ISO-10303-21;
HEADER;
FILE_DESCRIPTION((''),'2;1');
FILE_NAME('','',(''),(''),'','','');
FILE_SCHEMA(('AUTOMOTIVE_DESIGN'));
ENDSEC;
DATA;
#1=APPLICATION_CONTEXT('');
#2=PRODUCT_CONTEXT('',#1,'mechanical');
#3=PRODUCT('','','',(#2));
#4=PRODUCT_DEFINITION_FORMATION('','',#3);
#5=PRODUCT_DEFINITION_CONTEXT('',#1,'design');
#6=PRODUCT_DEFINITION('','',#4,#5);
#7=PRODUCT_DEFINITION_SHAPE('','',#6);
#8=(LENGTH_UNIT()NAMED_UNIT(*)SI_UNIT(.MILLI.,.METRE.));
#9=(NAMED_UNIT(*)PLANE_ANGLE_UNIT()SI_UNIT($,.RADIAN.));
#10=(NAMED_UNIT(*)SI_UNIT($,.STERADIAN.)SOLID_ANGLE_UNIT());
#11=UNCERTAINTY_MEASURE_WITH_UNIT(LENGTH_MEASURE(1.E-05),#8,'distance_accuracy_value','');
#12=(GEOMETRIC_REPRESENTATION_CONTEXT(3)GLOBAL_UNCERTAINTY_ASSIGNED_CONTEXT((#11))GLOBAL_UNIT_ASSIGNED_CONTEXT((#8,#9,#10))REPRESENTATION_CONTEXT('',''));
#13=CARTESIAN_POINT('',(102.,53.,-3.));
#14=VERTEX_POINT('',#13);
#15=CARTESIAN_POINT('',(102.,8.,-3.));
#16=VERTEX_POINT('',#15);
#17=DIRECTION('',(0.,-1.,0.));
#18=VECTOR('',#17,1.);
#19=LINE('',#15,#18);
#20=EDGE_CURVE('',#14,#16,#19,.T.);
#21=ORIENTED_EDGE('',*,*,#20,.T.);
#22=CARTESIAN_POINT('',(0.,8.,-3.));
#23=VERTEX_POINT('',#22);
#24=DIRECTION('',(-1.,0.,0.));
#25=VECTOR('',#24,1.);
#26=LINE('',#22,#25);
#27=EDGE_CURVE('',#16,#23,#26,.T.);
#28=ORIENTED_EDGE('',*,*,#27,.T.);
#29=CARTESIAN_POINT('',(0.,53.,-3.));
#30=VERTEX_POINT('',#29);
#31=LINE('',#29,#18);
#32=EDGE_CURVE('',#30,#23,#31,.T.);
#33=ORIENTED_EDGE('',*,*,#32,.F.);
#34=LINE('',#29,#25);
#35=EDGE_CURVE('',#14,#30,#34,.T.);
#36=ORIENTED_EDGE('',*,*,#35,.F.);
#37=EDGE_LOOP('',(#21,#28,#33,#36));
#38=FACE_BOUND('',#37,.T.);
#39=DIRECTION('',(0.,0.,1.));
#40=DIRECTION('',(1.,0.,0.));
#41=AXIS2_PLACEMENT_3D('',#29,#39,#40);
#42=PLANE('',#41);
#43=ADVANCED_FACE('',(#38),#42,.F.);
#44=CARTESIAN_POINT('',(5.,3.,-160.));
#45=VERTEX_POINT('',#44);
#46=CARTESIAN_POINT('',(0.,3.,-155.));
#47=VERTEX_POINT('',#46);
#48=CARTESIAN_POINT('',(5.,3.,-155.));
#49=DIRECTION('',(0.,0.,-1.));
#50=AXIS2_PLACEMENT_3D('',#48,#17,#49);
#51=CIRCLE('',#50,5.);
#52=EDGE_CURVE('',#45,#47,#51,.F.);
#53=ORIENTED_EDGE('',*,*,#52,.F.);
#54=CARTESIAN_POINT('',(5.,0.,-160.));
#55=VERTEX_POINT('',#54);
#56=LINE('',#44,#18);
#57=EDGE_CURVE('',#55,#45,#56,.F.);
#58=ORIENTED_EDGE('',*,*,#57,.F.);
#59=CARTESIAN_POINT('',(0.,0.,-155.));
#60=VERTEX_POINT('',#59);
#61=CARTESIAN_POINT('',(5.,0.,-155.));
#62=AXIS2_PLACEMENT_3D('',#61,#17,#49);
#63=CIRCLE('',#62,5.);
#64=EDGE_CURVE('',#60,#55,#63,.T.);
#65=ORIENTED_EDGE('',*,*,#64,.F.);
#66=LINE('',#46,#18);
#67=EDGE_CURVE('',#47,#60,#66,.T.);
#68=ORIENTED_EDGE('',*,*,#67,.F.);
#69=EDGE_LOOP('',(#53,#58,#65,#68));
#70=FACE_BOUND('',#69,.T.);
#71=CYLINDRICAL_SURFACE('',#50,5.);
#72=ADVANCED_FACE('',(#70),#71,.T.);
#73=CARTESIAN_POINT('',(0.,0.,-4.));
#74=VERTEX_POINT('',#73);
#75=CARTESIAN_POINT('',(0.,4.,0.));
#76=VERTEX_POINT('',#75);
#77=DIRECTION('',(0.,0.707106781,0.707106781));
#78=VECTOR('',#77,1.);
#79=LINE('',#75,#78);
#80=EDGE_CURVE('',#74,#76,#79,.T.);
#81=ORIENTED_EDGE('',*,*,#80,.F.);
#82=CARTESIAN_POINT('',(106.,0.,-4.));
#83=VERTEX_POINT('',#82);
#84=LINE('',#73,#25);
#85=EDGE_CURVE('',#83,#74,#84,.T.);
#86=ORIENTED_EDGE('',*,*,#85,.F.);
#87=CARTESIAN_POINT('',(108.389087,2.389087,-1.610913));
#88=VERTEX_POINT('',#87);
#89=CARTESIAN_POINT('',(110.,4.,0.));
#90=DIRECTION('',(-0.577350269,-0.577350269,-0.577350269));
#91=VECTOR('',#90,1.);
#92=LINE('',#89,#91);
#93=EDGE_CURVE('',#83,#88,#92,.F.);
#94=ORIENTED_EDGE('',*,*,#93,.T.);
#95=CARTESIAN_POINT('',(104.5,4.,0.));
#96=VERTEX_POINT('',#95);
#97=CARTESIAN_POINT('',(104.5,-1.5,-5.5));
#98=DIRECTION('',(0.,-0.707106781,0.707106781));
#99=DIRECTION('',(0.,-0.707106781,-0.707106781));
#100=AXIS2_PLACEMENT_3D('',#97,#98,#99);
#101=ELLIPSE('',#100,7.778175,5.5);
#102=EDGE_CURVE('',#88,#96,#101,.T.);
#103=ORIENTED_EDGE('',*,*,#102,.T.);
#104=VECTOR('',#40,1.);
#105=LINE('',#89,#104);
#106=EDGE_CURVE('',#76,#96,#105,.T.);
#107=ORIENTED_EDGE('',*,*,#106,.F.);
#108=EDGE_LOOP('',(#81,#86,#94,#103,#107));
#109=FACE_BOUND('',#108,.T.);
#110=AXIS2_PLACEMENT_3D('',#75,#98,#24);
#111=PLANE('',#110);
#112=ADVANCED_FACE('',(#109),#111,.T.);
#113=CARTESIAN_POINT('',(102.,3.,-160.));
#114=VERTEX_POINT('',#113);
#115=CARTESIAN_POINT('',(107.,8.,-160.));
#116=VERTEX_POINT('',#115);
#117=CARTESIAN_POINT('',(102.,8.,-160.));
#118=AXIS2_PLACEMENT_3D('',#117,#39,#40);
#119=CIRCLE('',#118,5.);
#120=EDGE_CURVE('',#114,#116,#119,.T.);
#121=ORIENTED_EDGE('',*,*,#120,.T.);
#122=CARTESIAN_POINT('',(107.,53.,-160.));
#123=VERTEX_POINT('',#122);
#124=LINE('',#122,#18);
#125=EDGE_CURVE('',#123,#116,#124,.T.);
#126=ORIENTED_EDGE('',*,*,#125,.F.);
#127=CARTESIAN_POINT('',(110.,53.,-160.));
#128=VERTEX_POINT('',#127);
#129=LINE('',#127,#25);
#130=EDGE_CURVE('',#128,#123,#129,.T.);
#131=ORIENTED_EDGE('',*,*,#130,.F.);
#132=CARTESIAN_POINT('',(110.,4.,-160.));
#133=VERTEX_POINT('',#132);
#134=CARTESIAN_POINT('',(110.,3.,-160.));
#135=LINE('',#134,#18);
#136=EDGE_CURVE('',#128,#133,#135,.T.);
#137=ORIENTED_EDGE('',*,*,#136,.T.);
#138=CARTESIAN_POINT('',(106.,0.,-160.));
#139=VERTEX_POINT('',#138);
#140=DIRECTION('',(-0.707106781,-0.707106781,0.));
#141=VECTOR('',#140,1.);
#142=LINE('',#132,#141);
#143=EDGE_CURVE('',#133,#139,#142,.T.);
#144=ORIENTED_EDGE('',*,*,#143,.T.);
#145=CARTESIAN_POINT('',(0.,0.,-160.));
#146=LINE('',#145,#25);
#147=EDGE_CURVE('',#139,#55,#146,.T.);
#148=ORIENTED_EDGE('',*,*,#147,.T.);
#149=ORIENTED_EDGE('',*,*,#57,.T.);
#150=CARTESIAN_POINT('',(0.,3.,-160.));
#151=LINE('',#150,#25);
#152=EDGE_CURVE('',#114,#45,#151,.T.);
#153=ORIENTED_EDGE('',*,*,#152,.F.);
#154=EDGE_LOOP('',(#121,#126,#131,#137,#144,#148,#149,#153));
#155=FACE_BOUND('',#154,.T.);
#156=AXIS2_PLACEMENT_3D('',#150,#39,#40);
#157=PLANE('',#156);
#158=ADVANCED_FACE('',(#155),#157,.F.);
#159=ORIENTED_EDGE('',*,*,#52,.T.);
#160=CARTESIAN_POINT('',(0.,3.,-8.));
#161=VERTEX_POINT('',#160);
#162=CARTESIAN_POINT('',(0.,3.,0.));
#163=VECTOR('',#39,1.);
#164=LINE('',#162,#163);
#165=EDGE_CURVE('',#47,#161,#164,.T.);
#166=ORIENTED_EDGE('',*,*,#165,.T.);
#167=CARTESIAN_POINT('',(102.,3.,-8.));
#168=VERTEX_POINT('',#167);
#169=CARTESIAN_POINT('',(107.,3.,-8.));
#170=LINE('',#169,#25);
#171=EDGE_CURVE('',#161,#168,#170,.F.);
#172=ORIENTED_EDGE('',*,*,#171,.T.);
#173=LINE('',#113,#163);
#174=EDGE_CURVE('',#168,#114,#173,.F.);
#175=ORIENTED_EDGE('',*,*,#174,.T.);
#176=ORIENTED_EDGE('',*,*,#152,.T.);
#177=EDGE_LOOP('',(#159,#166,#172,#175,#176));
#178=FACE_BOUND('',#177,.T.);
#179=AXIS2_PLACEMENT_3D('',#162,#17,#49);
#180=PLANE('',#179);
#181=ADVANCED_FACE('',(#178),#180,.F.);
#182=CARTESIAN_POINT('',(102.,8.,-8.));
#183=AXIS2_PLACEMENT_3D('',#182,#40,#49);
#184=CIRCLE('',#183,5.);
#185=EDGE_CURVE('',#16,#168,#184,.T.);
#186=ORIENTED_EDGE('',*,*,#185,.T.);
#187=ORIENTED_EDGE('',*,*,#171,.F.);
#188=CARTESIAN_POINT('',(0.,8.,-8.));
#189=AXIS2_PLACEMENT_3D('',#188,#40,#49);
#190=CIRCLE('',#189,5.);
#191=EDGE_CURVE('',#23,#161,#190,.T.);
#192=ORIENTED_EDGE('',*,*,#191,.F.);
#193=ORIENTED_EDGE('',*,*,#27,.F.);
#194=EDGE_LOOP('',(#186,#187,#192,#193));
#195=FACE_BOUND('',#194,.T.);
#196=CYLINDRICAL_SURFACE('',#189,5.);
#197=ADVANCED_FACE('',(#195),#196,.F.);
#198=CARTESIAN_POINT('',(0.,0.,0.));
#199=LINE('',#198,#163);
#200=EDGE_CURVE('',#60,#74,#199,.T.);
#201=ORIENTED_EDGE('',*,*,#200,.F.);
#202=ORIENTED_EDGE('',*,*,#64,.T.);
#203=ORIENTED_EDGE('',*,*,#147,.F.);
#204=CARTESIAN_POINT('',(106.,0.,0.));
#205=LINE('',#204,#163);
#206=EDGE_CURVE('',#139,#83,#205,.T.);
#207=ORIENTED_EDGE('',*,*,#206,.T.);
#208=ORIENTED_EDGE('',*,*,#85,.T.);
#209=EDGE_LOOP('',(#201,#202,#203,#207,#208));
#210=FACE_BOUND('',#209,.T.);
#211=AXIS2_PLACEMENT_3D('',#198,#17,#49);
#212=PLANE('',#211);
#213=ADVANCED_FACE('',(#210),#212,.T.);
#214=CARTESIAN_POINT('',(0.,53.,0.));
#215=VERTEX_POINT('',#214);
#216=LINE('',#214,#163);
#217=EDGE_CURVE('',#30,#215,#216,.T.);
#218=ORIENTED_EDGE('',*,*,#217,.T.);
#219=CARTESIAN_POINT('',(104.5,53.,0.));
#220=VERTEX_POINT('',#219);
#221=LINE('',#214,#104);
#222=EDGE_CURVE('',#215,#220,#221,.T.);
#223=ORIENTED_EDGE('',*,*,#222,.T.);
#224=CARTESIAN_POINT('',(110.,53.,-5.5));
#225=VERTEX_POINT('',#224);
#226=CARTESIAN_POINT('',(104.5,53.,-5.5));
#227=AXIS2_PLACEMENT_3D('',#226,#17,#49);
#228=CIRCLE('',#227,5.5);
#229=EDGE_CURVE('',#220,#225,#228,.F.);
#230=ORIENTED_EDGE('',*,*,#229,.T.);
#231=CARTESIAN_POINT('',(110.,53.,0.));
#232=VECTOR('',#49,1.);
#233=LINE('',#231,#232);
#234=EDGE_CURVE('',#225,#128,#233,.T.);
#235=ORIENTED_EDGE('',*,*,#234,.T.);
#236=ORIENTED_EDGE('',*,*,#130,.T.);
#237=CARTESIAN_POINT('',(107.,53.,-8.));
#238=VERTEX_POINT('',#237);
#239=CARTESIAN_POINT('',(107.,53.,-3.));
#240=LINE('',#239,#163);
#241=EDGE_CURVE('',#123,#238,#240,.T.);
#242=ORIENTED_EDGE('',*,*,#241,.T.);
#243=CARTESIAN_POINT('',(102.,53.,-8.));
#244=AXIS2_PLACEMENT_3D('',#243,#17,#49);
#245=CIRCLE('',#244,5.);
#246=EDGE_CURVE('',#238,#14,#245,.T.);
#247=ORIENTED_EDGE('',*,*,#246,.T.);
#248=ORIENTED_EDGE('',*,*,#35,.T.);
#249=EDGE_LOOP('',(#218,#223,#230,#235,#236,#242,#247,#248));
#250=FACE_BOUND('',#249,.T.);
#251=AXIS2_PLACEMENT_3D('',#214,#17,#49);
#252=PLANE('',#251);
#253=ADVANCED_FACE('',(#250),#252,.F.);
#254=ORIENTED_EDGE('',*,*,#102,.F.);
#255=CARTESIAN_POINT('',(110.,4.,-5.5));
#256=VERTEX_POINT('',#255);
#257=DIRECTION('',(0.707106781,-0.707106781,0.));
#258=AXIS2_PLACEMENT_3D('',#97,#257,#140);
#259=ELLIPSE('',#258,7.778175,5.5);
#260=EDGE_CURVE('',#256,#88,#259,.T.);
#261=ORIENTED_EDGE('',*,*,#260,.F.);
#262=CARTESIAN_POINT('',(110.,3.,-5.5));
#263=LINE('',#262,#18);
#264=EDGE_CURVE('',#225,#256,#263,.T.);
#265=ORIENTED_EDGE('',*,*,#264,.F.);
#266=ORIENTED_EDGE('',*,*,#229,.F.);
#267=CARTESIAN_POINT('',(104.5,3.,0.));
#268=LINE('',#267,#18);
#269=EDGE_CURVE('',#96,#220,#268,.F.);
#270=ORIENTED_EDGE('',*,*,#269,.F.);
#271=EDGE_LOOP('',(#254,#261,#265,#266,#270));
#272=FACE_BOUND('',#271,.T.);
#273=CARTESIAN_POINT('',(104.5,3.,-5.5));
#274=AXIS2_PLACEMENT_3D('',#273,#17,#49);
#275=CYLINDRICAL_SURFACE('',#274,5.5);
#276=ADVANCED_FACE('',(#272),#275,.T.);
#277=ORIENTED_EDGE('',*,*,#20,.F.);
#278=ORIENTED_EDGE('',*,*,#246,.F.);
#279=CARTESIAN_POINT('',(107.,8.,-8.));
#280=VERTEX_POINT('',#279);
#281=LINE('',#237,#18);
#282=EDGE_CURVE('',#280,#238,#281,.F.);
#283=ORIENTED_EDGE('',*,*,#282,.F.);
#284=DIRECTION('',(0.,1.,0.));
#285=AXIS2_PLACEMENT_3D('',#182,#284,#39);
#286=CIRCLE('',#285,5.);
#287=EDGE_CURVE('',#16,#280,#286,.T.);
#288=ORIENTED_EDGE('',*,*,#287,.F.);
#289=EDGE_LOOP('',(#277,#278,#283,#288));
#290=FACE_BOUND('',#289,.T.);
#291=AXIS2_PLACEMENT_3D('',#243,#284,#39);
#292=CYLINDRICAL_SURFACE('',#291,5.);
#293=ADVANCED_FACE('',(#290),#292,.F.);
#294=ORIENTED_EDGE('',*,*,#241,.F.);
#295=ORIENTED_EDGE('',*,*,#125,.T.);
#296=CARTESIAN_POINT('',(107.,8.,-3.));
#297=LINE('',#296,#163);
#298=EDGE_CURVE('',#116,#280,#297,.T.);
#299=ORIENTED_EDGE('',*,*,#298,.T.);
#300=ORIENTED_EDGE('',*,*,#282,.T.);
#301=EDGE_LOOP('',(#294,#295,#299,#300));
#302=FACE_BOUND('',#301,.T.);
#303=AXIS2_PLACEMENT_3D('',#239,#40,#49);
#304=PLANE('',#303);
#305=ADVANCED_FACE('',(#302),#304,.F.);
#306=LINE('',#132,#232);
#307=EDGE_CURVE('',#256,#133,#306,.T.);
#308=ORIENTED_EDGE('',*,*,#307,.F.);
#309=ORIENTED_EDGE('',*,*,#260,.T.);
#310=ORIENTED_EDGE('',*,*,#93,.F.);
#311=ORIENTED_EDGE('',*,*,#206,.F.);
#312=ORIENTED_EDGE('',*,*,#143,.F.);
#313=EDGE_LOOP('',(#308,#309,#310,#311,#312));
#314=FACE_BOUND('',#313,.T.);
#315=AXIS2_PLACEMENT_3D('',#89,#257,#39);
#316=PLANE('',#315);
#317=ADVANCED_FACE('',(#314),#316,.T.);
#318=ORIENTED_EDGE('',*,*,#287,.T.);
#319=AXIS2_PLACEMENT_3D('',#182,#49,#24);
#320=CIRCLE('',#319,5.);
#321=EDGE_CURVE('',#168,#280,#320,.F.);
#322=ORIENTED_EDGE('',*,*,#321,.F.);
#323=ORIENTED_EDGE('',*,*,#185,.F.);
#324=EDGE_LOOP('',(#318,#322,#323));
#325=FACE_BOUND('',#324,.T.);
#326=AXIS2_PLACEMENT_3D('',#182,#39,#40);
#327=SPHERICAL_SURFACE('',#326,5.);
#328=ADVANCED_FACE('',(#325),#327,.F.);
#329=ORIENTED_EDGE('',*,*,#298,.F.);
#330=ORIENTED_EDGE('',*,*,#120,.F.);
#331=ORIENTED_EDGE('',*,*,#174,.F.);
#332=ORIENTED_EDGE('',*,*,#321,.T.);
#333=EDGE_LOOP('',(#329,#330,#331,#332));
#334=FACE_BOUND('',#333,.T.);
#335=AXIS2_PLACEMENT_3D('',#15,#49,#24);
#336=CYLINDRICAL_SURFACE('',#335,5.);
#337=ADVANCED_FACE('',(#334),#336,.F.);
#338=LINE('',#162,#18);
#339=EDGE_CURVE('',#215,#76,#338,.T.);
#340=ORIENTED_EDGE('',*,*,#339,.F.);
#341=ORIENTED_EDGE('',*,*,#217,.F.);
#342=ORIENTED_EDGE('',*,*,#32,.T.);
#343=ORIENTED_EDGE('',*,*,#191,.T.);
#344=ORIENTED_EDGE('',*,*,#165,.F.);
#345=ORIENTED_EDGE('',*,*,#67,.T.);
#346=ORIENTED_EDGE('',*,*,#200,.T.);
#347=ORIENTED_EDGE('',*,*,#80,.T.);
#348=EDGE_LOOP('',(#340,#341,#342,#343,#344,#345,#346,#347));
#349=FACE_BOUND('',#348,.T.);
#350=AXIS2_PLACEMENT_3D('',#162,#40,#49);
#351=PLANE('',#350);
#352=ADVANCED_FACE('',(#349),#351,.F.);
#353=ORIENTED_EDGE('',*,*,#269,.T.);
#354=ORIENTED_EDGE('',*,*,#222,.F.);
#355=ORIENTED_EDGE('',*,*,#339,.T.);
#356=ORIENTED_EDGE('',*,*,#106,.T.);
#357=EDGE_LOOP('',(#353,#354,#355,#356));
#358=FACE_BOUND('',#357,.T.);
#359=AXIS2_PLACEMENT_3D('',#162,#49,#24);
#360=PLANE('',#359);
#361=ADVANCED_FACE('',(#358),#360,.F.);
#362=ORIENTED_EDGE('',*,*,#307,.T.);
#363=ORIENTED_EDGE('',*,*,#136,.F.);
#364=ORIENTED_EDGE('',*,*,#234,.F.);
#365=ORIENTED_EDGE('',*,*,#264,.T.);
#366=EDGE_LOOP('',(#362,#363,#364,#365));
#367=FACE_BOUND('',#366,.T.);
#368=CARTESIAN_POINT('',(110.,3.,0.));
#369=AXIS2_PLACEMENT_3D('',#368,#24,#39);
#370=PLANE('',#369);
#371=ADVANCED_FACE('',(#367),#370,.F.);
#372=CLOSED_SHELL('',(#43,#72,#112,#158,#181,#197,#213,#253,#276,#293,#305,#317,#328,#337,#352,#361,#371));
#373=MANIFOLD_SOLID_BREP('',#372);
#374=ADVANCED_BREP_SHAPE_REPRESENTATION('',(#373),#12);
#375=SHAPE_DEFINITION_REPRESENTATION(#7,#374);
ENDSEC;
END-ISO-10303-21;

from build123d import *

# Parameters (mm, degrees)
SKETCH_1_W      = 110
SKETCH_1_H      = 160
EXTRUDE_1_DEPTH = 3
EXTRUDE_2_DEPTH = 50
FILLET_1_R      = 5
CHAMFER_1_SIZE  = 4
FILLET_2_R      = 5
FILLET_3_R      = 5
FILLET_4_R      = 5.5


with BuildPart() as part:
    # 草图1 → 凸台-拉伸1 (new body)
    with BuildSketch(Plane(origin=(0, 0, 0), x_dir=(1, 0, 0), z_dir=(0, 1, 0))):
        with Locations((55, 80)):
            Rectangle(SKETCH_1_W, SKETCH_1_H)
    extrude(amount=EXTRUDE_1_DEPTH)

    # 草图2 → 凸台-拉伸2 (add)
    with BuildSketch(Plane(origin=(0, 3, 0), x_dir=(1, 0, 0), z_dir=(0, 1, 0))):
        Polygon((0, 0), (110, 0), (110, 3), (110, 160), (107, 160), (107, 3), (0, 3), align=None)
    extrude(amount=EXTRUDE_2_DEPTH)

    # 圆角1
    fillet_1_edges = [part.edges().sort_by_distance(p)[0] for p in [
        (107, 3, -81.5),
        (53.5, 3, -3),
    ]]
    fillet(fillet_1_edges, radius=FILLET_1_R)

    # 倒角1
    chamfer_1_edges = [part.edges().sort_by_distance(p)[0] for p in [
        (110, 0, -80),
        (55, 0, 0),
    ]]
    chamfer(chamfer_1_edges, length=CHAMFER_1_SIZE)

    # 圆角2
    fillet_2_edges = [part.edges().sort_by_distance(p)[0] for p in [
        (0, 1.5, -160),
    ]]
    fillet(fillet_2_edges, radius=FILLET_2_R)

    # 圆角3
    # the kernel refuses this fillet: 5 mm, written as the material it adds along each edge
    with BuildSketch(Plane(origin=(102, 8, -8), x_dir=(0, 0, 1), z_dir=(1, 0, 0))) as fillet_3_piece_1_section:
        Polygon((0, 0), (FILLET_3_R, 0), (FILLET_3_R, FILLET_3_R), (0, FILLET_3_R), align=None)
    fillet_3_piece_1 = extrude(amount=FILLET_3_R, mode=Mode.PRIVATE)
    fillet_3_piece_1 = fillet_3_piece_1 - Plane(origin=(102, 8, -8), x_dir=(0, 0.7071067811865475, -0.7071067811865475), z_dir=(1, 0, 0)) * Sphere(FILLET_3_R, mode=Mode.PRIVATE)
    add(fillet_3_piece_1)
    with BuildSketch(Plane(origin=(107, 8, -3), x_dir=(0, 0, -1), z_dir=(0, 1, 0))) as fillet_3_piece_2:
        with BuildLine():
            CenterArc((FILLET_3_R, FILLET_3_R), FILLET_3_R, 180, 90)
            Line((0, FILLET_3_R), (0, 0))
            Line((0, 0), (FILLET_3_R, 0))
        make_face()
    extrude(amount=45)

    # 圆角4
    fillet_4_edges = [part.edges().sort_by_distance(p)[0] for p in [
        (110, 28.5, 0),
    ]]
    fillet(fillet_4_edges, radius=FILLET_4_R)


solid = part.part
